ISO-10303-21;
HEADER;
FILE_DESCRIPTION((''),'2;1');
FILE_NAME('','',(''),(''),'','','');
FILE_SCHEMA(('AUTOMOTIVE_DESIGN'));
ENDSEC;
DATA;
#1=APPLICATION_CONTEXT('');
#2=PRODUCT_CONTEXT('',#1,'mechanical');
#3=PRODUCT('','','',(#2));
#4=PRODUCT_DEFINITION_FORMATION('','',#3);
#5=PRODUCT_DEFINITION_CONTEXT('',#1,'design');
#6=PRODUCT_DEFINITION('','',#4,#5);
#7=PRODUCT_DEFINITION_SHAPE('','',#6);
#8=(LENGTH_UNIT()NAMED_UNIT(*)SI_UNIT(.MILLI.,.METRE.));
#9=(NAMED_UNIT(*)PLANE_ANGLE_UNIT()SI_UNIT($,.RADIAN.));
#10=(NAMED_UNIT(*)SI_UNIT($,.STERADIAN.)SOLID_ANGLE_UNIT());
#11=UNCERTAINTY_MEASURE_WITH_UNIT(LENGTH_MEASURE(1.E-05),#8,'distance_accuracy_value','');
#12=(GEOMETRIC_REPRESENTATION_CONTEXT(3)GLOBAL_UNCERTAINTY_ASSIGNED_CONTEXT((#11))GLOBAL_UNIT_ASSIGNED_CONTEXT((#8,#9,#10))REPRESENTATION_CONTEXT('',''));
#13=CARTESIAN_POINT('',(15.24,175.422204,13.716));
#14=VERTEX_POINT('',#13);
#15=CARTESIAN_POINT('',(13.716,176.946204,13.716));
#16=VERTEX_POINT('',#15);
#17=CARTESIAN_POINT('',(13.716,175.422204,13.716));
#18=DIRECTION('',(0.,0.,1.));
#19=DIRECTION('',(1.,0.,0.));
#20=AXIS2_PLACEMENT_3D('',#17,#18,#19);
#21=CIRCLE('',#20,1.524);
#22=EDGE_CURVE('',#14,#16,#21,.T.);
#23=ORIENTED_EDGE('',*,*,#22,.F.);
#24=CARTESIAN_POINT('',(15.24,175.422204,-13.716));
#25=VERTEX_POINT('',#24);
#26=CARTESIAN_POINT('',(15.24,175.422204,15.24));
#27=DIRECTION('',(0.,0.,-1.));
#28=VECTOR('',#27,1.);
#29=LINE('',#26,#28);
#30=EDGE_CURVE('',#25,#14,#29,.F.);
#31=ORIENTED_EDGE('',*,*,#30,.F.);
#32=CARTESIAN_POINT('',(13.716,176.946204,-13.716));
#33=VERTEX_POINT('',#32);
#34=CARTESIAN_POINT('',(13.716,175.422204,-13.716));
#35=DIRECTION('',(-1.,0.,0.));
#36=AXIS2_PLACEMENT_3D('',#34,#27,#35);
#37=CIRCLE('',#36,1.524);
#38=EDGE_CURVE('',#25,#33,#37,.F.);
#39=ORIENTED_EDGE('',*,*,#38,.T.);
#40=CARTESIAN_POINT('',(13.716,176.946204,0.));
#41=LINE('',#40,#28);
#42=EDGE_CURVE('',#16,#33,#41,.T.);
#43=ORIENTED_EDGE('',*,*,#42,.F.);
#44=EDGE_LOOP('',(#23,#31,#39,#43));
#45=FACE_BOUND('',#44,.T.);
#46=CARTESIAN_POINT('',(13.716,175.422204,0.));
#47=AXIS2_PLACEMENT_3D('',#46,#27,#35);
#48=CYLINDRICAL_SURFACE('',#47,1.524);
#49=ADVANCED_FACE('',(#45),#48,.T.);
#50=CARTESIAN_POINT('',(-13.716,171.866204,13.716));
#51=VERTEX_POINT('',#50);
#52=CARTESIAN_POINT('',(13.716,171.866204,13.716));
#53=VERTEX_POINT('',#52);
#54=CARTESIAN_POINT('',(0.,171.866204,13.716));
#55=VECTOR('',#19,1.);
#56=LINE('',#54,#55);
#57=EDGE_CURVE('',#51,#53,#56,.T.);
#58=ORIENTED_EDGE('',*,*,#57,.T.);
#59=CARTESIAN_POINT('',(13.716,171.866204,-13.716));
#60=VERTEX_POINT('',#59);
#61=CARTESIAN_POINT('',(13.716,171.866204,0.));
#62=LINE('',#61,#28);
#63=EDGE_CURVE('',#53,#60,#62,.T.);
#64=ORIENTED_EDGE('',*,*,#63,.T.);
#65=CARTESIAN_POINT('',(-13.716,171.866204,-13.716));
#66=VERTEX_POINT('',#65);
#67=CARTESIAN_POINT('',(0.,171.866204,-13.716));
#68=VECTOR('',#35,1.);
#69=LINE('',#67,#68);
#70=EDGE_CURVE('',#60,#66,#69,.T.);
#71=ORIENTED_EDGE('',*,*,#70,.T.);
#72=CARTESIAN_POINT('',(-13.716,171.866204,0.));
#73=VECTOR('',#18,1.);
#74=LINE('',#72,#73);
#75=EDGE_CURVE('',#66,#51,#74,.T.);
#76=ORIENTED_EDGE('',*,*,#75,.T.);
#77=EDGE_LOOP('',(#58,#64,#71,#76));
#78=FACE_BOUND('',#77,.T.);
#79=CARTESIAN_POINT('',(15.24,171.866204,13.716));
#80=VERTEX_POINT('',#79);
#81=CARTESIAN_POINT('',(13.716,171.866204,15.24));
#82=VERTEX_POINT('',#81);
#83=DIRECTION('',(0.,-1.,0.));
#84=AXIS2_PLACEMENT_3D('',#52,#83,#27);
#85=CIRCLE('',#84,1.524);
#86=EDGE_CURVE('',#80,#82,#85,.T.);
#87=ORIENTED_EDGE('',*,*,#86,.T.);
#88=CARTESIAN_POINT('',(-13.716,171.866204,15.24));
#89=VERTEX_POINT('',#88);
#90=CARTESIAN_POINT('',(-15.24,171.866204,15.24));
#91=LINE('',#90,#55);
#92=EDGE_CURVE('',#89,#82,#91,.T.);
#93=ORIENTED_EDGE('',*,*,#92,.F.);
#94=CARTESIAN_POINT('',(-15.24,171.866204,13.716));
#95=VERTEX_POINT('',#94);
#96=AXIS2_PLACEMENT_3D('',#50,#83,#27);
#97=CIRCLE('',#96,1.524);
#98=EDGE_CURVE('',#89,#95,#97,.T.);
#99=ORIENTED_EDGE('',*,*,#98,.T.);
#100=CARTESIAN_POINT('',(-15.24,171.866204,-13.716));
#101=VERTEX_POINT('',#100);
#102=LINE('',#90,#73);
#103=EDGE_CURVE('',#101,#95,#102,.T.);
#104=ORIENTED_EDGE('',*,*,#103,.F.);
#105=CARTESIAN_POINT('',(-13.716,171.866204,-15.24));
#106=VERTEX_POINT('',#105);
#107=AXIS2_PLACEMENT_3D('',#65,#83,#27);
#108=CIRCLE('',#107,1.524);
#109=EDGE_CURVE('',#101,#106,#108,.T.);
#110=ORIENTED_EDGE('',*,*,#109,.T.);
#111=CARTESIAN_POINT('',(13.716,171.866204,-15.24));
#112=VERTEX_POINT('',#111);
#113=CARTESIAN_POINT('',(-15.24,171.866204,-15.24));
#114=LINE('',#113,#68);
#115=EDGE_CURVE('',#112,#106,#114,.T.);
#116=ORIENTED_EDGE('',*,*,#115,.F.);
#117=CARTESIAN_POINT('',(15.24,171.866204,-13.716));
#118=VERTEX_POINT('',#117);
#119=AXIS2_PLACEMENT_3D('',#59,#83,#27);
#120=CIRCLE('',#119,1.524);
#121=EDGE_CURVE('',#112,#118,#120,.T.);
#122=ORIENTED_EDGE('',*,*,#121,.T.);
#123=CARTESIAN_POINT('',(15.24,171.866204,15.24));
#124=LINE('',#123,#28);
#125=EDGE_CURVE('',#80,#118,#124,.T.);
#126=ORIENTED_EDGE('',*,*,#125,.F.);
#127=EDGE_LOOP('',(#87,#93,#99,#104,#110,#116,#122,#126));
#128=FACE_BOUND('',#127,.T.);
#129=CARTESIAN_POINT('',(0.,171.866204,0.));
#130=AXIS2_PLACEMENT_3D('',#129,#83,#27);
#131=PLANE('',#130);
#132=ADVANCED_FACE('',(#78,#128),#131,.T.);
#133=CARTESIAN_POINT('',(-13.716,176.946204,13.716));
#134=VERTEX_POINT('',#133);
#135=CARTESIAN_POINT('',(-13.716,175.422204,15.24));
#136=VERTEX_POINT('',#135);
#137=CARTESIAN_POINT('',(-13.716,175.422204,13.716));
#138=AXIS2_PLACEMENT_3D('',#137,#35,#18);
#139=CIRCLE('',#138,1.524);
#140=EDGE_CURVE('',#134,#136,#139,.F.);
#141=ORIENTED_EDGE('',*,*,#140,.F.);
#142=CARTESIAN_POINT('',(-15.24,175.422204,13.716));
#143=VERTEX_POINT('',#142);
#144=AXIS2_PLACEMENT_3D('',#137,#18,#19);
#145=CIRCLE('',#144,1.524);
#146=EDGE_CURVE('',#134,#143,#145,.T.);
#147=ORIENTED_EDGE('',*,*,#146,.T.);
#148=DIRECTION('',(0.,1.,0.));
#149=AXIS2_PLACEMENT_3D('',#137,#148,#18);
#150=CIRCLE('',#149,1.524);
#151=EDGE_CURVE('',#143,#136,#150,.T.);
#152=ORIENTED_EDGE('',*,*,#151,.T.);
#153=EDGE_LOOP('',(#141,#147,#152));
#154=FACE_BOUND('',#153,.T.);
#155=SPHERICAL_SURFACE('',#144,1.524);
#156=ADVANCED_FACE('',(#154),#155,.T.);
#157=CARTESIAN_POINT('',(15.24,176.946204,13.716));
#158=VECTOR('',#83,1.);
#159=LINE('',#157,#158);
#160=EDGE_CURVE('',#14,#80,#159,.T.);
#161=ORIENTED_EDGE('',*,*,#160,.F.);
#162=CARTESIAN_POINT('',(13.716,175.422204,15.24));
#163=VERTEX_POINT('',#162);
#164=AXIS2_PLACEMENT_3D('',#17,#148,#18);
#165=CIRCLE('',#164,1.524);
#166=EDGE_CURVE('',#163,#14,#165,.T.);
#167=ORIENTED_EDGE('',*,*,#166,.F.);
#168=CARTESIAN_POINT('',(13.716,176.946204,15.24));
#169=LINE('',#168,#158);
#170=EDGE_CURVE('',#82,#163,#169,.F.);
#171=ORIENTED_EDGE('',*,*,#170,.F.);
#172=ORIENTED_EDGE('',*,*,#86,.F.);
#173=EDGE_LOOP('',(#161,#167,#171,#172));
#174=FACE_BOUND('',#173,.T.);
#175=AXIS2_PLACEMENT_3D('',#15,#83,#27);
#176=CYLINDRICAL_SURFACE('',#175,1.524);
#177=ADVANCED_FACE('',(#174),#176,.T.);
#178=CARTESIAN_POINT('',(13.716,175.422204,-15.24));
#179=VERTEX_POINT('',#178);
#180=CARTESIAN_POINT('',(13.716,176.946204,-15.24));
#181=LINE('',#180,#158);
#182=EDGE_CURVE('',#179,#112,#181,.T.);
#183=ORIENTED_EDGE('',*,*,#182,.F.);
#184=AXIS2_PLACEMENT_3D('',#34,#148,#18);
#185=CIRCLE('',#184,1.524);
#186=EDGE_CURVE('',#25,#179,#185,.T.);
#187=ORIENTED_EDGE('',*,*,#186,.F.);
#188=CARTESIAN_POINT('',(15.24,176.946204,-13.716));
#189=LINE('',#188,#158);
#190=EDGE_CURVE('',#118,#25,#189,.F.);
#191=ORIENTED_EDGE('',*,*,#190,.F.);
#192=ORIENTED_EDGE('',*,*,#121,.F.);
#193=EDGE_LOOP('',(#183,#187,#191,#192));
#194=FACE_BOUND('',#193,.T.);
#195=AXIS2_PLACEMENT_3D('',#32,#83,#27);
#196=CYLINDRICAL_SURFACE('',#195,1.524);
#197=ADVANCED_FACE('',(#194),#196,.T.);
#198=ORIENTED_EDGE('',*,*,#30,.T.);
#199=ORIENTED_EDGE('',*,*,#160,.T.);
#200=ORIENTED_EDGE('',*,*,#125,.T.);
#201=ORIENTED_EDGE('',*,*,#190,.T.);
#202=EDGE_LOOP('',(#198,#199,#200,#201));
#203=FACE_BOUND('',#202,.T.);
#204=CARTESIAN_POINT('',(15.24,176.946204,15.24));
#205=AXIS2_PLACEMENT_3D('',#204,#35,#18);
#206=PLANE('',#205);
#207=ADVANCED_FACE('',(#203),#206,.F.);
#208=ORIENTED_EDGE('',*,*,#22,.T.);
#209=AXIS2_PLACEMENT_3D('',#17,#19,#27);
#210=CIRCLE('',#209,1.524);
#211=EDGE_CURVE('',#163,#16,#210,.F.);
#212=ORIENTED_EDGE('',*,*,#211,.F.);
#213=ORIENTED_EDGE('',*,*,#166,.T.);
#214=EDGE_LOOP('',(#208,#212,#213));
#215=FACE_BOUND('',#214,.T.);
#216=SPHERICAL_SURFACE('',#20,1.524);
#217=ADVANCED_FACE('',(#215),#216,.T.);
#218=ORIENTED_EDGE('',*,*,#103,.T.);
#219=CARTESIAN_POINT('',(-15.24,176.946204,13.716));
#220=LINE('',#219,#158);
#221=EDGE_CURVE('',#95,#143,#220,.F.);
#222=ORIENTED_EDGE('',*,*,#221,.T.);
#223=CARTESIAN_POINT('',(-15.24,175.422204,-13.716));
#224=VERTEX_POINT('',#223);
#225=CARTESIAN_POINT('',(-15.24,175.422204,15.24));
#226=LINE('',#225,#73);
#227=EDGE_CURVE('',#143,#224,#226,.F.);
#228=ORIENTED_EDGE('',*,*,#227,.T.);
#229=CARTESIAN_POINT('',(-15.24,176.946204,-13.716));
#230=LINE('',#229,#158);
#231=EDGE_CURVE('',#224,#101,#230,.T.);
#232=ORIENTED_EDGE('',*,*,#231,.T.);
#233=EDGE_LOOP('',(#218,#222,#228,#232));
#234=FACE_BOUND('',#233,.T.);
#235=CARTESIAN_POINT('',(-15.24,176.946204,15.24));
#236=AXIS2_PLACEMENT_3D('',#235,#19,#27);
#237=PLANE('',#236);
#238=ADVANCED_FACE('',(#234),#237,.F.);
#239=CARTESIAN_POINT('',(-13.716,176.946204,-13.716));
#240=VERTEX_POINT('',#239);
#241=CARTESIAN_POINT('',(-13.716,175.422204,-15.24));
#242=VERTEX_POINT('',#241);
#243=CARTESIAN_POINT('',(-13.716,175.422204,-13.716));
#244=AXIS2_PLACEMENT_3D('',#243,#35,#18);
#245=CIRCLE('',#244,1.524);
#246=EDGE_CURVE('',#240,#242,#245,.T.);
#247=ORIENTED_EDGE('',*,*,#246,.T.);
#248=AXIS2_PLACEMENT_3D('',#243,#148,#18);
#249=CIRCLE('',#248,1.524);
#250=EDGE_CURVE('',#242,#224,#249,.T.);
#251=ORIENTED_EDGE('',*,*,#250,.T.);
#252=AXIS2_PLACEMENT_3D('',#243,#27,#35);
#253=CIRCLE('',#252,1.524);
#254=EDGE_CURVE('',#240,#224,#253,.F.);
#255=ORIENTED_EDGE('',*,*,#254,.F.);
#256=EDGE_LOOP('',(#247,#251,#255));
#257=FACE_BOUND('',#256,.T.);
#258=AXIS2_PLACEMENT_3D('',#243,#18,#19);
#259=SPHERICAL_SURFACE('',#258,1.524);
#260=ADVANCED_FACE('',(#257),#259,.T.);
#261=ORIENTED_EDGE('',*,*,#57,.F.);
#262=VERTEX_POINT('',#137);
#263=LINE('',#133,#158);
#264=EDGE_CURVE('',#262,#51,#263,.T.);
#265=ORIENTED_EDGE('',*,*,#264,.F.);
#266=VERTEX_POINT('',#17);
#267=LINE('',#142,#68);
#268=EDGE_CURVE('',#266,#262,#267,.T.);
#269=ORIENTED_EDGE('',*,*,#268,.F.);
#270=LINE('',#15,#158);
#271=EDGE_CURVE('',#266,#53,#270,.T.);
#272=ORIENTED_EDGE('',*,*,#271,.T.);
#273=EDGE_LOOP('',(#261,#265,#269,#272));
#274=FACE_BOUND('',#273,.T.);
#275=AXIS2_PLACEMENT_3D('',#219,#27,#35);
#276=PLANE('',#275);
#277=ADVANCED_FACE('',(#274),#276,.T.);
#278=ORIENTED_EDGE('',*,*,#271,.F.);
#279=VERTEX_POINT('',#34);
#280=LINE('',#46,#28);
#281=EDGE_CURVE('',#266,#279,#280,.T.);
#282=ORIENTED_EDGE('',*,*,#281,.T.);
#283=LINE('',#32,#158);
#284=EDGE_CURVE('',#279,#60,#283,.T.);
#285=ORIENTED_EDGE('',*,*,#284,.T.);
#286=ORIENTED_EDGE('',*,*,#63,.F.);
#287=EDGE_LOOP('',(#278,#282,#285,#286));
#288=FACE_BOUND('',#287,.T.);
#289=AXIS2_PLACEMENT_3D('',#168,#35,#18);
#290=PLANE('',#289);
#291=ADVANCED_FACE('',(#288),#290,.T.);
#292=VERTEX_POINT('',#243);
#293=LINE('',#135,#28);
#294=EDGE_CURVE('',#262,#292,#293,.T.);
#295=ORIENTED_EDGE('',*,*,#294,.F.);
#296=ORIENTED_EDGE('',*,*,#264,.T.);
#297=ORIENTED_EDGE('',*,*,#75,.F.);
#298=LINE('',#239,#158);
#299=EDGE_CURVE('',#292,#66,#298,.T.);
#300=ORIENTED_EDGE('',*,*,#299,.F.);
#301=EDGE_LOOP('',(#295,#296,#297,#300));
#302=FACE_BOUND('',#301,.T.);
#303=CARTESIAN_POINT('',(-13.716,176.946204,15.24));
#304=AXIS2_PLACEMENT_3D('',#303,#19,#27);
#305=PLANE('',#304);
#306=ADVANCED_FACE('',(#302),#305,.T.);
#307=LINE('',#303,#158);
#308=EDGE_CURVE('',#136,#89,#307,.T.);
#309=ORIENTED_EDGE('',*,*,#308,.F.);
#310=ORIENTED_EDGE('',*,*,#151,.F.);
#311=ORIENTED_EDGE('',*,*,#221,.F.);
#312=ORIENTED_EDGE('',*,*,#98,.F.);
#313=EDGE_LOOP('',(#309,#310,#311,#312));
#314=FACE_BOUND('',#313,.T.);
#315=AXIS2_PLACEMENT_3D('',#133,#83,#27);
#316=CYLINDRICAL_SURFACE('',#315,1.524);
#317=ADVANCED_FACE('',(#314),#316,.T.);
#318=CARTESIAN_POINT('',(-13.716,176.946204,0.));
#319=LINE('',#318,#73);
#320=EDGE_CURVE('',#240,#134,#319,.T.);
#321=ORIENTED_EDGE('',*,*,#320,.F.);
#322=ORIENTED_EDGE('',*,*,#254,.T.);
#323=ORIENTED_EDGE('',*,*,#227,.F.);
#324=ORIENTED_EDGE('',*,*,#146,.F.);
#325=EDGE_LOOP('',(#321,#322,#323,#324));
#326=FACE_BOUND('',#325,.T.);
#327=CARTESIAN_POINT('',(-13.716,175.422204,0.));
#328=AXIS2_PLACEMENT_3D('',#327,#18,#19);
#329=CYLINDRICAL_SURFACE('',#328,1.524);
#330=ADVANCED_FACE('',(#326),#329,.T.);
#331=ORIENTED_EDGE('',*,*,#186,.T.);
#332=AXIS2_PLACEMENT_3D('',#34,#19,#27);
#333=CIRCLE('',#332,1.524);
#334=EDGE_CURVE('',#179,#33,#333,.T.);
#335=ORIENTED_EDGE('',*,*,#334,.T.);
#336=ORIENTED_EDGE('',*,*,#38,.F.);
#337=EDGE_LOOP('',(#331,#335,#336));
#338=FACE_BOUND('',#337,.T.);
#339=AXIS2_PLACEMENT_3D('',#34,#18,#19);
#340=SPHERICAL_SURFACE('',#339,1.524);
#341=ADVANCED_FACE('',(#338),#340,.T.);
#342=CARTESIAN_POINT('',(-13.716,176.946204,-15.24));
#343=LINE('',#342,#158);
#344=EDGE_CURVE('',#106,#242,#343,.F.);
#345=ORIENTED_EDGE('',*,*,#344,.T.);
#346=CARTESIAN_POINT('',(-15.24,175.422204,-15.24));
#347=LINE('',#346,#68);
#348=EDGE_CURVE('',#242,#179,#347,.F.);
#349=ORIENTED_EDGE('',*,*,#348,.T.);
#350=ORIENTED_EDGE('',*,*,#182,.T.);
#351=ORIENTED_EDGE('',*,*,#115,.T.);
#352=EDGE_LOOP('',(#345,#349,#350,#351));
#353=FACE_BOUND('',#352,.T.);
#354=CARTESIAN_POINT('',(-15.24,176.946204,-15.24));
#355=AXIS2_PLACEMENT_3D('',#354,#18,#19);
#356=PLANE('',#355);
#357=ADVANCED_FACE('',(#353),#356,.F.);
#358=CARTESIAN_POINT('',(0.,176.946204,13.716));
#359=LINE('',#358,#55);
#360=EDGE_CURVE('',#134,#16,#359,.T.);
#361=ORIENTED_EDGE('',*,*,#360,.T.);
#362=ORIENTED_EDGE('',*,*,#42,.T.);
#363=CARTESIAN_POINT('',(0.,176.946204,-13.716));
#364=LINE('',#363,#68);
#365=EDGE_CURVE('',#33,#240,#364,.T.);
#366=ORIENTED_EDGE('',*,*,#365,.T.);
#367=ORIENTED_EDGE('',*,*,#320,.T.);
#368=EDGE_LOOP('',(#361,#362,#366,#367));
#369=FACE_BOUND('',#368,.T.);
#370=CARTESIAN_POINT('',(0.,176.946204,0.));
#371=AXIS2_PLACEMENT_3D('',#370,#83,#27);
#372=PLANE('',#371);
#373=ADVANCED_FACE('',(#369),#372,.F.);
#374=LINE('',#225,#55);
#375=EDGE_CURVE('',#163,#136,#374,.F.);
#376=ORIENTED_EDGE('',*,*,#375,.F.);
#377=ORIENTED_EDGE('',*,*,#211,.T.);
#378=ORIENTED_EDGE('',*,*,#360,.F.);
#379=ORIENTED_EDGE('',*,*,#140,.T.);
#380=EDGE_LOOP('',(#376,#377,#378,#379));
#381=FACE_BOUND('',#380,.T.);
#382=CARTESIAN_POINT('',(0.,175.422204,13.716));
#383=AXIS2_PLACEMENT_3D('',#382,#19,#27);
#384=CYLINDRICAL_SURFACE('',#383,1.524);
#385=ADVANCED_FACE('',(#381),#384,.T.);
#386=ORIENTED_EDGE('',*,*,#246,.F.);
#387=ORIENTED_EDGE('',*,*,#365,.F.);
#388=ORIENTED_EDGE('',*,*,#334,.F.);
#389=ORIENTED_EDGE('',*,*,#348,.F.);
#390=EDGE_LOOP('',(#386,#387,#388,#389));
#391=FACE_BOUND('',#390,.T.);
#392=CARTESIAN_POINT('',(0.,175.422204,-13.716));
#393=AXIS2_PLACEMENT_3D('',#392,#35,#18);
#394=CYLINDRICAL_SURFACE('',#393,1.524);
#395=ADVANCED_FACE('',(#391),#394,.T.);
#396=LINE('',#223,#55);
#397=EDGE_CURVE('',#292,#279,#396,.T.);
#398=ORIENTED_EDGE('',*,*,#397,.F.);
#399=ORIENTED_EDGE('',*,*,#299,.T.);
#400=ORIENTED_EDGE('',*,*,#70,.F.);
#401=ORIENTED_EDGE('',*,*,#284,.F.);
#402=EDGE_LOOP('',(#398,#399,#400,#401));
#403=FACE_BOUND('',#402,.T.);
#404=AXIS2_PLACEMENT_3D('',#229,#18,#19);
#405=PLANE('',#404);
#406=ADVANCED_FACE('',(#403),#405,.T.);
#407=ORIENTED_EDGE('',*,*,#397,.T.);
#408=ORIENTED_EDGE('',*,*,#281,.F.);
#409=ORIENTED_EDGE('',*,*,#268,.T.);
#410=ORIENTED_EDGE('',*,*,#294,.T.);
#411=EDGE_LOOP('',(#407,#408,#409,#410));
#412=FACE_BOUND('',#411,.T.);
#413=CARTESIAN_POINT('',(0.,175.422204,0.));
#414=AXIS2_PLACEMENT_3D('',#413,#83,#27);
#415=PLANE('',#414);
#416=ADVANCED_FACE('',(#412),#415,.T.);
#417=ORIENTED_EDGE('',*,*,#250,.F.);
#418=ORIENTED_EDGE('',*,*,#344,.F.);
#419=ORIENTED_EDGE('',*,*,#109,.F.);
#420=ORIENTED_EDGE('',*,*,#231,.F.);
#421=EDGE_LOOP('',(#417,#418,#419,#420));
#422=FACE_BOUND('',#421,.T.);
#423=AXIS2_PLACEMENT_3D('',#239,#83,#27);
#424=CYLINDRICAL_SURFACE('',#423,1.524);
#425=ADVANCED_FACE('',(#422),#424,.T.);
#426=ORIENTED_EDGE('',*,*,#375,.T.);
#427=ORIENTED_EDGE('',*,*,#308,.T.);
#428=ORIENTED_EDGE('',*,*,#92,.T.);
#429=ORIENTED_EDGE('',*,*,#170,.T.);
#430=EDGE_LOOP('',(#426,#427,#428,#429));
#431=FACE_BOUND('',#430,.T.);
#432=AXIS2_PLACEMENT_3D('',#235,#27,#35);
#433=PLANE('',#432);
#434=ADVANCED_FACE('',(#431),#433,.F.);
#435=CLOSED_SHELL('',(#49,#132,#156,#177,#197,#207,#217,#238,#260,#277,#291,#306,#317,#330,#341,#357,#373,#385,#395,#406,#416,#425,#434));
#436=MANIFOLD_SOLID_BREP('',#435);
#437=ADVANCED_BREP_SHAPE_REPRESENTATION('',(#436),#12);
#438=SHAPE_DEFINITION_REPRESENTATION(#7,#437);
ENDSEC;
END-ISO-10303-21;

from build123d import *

# Parameters (mm, degrees)
SKETCH1_W           = 1524
SKETCH1_H           = 1524
BOSS_EXTRUDE1_DEPTH = 254
FILLET1_R           = 76.2
SHELL1_START        = -685.8
SHELL1_OUTLINE_W    = 177.8
SHELL1_OUTLINE_H    = 1371.6
SHELL1_DEPTH        = 1371.6
SCALE1_SCALE        = 0.02


# Read off the part's stored shape, not the designer's step: Shell1
with BuildPart() as part:
    # Sketch1 → Boss-Extrude1 (new body)
    with BuildSketch(Plane(origin=(0, 0, 0), x_dir=(1, 0, 0), z_dir=(0, 1, 0))):
        Rectangle(SKETCH1_W, SKETCH1_H)
    extrude(amount=BOSS_EXTRUDE1_DEPTH)

    # Fillet1
    fillet1_edges = [part.edges().sort_by_distance(p)[0] for p in [
        (-762, 254, 0),
        (0, 254, 762),
        (762, 254, 0),
        (762, 127, 762),
        (-762, 127, 762),
        (-762, 127, -762),
        (762, 127, -762),
        (0, 254, -762),
    ]]
    fillet(fillet1_edges, radius=FILLET1_R)

    # Shell1 outline → Shell1 (cut)
    with BuildSketch(Plane.YZ.offset(SHELL1_START)):
        with Locations((88.9, 0)):
            Rectangle(SHELL1_OUTLINE_W, SHELL1_OUTLINE_H)
    extrude(amount=SHELL1_DEPTH, mode=Mode.SUBTRACT)


with BuildPart() as part_1:
    # Scale1: scaled about (0, 175.373677195, 0)
    add(part.part.scale(SCALE1_SCALE).moved(Location((0, 171.866203651, 0))))


solid = part_1.part
